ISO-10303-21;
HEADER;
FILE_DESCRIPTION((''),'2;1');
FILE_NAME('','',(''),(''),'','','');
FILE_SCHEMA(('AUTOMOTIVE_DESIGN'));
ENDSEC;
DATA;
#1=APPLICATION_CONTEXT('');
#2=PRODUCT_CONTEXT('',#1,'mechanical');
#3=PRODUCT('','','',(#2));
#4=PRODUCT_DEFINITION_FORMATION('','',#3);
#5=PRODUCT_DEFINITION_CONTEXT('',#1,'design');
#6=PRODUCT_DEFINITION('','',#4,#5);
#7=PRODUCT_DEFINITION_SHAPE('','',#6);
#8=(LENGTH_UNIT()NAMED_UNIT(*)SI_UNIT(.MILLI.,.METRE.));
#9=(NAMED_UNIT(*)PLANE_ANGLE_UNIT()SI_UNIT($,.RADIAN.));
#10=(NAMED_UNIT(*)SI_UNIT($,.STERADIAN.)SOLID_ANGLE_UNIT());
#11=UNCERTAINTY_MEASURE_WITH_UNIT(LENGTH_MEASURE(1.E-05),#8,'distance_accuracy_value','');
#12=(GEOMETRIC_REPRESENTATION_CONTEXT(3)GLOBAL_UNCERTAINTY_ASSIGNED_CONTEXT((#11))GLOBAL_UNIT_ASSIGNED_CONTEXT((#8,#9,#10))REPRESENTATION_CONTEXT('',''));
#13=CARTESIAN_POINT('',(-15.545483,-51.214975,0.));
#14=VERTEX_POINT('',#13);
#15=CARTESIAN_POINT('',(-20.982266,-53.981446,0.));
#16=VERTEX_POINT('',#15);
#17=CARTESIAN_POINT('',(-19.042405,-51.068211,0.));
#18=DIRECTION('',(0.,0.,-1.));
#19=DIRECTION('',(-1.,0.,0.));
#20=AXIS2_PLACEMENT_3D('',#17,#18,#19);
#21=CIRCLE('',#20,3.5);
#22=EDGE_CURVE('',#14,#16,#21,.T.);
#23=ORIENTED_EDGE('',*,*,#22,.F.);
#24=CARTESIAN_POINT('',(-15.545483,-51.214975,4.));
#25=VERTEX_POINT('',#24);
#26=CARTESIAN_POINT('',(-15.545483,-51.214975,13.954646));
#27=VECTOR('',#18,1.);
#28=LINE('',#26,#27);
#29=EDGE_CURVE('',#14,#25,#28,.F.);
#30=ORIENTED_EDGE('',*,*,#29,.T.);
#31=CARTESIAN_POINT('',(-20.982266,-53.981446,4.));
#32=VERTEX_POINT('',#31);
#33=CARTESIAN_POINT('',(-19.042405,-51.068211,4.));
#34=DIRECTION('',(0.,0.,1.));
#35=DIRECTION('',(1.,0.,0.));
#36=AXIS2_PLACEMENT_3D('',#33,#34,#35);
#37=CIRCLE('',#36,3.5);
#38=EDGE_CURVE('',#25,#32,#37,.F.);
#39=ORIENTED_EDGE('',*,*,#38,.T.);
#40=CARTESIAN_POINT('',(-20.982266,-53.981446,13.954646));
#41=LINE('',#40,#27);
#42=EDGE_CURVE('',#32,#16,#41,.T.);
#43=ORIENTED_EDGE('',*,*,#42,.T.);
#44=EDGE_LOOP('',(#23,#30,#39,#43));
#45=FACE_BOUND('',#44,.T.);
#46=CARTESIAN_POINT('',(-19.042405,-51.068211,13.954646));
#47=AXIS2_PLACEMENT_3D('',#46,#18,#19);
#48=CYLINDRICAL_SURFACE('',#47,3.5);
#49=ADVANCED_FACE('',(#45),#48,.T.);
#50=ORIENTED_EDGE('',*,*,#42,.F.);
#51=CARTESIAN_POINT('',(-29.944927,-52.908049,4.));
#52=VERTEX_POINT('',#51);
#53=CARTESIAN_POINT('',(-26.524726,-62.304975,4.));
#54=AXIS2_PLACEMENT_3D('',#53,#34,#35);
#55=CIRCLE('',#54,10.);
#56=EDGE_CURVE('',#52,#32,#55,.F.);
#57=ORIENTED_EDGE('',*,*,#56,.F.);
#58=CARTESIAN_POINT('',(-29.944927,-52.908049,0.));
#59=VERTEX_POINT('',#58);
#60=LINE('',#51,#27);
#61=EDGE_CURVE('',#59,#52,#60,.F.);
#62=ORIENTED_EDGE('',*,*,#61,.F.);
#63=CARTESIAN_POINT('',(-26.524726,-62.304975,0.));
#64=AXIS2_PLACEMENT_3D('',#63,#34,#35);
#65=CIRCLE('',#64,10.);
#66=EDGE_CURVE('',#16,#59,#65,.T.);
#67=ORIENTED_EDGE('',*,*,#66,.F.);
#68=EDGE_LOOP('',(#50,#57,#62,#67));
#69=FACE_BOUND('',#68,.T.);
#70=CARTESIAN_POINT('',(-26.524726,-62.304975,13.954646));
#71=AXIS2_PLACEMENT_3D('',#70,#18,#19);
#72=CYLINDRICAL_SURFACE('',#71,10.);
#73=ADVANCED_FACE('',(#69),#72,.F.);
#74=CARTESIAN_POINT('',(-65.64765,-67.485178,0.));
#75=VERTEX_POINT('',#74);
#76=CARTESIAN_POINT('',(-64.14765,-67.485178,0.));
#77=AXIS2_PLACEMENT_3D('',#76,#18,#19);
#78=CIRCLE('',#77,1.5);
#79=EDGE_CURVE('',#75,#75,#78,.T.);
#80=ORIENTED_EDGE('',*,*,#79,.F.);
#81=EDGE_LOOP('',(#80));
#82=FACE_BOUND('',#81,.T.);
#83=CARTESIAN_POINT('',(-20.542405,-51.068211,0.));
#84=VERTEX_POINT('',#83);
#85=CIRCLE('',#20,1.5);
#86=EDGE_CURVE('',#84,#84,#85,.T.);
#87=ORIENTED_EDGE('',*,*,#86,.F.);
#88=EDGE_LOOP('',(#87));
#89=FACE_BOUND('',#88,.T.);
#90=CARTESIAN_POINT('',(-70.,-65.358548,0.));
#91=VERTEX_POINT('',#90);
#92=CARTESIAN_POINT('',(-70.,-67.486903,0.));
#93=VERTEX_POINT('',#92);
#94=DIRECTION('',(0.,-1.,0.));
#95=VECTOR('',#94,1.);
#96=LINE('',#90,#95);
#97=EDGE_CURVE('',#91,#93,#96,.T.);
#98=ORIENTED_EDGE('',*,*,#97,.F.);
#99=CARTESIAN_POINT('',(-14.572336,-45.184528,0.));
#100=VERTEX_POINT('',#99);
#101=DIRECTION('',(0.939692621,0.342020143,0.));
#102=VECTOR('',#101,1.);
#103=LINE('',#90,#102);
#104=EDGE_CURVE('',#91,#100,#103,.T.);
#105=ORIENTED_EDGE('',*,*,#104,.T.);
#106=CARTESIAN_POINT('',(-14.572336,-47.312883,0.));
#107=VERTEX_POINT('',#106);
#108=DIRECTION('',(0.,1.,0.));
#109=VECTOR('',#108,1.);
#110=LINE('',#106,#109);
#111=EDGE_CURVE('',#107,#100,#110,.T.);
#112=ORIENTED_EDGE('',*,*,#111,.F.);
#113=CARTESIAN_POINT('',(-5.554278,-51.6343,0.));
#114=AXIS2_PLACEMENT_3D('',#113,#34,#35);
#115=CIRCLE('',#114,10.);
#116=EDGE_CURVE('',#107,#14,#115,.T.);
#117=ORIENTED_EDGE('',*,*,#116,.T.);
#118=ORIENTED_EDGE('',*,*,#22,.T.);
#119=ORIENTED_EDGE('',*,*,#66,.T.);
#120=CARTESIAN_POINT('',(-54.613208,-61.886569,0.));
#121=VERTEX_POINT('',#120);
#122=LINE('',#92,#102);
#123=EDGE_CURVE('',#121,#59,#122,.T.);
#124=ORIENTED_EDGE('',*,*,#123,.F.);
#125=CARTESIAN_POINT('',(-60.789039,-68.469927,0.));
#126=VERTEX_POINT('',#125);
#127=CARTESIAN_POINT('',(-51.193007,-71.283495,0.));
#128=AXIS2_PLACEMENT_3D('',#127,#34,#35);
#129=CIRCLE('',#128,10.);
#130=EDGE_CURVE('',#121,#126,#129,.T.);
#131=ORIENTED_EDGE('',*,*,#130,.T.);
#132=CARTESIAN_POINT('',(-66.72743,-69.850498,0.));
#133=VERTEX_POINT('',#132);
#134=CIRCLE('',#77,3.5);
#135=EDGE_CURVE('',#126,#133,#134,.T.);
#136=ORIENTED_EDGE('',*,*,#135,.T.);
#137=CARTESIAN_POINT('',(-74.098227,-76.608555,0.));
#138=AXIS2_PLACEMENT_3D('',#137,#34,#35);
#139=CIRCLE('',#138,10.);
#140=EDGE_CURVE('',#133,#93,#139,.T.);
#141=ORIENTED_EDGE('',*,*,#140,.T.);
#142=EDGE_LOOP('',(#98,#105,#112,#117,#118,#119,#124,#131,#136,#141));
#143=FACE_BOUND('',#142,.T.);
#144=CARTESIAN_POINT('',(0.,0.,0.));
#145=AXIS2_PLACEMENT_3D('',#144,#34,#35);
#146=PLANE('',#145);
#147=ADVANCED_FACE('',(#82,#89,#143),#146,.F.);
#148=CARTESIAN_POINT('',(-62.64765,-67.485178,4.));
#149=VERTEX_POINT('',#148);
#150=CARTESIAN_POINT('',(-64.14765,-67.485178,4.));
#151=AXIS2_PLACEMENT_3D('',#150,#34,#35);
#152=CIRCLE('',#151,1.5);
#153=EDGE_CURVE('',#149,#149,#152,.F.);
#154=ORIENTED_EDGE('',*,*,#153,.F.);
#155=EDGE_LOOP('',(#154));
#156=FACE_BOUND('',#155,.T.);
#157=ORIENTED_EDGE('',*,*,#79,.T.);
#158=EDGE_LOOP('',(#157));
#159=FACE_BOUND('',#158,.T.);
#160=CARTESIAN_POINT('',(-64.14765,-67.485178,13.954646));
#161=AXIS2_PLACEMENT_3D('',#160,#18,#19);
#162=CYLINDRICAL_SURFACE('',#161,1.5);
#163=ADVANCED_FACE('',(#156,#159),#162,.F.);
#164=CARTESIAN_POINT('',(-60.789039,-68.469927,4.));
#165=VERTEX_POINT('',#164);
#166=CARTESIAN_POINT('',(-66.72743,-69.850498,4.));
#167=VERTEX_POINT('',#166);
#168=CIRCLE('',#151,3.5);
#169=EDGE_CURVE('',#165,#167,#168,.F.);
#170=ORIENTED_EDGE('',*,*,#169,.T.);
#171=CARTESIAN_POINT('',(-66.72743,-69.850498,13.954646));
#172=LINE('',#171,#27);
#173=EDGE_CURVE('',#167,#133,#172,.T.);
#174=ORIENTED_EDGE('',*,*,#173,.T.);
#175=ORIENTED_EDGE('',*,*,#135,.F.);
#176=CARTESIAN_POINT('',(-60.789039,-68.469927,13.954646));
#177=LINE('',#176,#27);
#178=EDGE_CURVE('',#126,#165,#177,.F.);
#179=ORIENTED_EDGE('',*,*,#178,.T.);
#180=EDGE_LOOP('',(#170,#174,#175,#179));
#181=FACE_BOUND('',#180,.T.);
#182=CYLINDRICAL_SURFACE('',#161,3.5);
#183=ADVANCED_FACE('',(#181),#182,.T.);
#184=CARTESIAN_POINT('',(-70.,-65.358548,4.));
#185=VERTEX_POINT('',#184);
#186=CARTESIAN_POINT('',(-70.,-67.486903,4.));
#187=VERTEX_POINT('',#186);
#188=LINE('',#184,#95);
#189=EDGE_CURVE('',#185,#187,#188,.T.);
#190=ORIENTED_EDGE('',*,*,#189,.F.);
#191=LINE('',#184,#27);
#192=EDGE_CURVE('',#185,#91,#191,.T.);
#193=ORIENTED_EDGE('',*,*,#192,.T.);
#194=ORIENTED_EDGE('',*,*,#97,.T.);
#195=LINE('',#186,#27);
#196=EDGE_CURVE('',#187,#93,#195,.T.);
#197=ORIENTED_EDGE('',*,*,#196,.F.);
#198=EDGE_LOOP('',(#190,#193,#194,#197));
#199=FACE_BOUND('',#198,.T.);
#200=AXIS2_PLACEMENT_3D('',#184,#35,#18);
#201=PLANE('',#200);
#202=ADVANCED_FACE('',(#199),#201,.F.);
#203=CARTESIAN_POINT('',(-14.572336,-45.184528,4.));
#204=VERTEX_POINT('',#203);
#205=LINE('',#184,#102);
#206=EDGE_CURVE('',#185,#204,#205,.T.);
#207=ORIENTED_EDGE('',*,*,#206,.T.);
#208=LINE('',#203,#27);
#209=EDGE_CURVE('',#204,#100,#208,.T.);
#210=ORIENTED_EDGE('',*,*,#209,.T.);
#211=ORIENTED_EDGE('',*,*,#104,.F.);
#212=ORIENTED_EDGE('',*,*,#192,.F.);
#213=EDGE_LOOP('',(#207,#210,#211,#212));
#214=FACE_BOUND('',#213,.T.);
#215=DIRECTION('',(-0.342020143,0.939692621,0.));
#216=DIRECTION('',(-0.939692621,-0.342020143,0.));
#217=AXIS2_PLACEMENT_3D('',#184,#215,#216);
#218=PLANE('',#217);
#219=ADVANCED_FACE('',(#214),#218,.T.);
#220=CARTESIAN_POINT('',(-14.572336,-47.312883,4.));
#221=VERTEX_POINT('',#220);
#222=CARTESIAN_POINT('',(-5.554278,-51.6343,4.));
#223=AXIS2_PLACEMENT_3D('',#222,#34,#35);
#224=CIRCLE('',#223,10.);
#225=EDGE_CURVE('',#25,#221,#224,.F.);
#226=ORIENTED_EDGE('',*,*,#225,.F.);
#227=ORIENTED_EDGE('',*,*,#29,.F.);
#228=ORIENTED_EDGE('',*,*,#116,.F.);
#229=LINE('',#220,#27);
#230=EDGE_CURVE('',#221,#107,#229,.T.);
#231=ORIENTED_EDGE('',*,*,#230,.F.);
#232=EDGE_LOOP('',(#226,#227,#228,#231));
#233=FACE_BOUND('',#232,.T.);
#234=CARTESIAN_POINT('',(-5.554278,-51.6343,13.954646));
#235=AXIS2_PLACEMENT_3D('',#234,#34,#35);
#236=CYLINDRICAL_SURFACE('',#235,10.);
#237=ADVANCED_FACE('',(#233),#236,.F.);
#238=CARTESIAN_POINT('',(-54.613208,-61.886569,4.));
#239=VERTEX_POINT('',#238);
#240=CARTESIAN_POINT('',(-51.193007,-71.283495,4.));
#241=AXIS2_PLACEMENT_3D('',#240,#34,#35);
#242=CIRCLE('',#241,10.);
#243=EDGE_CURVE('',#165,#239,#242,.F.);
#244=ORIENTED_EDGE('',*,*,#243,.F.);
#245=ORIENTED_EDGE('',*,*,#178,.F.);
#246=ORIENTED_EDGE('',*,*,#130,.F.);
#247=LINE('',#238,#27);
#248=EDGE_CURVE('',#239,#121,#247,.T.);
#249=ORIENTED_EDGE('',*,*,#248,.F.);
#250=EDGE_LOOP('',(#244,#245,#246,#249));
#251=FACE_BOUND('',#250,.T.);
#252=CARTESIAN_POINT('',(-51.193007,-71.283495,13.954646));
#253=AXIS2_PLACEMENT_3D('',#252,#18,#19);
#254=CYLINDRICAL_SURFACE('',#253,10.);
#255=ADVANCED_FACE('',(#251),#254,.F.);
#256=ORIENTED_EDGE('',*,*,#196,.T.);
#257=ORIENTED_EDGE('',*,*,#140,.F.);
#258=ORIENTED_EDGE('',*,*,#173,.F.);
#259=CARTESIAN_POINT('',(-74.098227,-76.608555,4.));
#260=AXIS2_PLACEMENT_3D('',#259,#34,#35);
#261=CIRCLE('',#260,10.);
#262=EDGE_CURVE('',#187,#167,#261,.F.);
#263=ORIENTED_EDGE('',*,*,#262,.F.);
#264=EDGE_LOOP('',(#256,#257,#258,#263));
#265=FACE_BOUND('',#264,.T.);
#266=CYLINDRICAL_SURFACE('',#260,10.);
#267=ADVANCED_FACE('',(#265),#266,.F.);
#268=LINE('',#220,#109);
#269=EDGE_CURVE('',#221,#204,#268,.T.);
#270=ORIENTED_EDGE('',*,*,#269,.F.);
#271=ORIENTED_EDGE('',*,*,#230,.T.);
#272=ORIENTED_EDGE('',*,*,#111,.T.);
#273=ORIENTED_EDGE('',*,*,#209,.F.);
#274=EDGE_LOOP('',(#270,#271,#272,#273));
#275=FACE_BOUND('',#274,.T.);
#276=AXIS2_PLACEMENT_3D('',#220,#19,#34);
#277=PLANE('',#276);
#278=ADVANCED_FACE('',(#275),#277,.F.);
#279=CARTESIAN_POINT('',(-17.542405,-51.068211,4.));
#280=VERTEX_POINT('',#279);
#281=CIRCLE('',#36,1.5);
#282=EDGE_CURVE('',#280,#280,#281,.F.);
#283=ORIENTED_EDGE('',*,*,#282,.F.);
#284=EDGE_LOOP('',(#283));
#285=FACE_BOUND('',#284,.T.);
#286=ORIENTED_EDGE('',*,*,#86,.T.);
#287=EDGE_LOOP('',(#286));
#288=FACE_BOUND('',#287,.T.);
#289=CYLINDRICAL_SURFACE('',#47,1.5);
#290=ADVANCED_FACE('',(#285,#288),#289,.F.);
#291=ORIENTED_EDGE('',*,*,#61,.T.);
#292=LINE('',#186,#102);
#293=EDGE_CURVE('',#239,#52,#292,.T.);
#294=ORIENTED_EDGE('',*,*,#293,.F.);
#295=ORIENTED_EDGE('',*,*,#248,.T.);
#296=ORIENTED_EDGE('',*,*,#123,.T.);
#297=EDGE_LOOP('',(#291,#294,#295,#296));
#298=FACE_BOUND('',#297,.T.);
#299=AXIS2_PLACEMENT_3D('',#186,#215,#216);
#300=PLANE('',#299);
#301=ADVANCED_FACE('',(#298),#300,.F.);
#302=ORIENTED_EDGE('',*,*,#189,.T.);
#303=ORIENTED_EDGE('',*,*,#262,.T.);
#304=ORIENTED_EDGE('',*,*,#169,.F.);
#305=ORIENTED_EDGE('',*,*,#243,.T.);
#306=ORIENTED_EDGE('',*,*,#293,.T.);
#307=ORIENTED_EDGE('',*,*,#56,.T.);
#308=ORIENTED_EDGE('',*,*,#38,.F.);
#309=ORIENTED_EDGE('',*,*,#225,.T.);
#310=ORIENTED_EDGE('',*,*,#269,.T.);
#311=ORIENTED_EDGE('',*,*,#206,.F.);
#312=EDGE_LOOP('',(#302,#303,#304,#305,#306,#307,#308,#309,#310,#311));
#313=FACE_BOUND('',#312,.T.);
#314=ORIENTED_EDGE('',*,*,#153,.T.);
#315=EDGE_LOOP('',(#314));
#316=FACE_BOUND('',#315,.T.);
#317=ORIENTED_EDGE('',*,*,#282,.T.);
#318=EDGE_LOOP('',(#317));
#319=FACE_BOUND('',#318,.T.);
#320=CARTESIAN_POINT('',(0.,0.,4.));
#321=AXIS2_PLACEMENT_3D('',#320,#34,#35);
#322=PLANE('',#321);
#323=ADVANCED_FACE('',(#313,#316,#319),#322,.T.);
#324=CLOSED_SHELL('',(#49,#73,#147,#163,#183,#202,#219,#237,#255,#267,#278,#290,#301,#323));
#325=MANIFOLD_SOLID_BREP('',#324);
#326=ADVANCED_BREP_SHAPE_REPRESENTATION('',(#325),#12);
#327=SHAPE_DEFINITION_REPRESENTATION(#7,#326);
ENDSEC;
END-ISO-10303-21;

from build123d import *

# Parameters (mm, degrees)
BOSS_EXTRUDE1_DEPTH = 4
SKETCH2_R           = 1.5
BOSS_EXTRUDE2_DEPTH = 4
FILLET1_DEPTH       = 4


with BuildPart() as part:
    # Sketch1 → Boss-Extrude1 (new body)
    with BuildSketch(Plane.XY):
        Polygon((-70, -65.358547654), (-14.572335871, -45.184527756), (-14.572335871, -47.312883301), (-70, -67.486903199), align=None)
    extrude(amount=BOSS_EXTRUDE1_DEPTH)

    # Sketch2 → Boss-Extrude2 (add)
    # profile 1 of 6: a face of its own
    with BuildSketch(Plane(origin=(0, 0, 0), x_dir=(-1, 0, 0), z_dir=(0, 0, -1))):
        with BuildLine():
            ThreePointArc((15.753480329, -49.871140271), (17.845334, -54.357134945), (22.331328674, -52.265281274))
            ThreePointArc((22.331328674, -52.265281274), (22.489231637, -51.675979394), (22.542404501, -51.068210772))
            ThreePointArc((22.542404501, -51.068210772), (22.513056924, -50.615914674), (22.425506352, -50.171203601))
            Line((22.425506352, -50.171203601), (17.027383224, -48.206447461))
            ThreePointArc((17.027383224, -48.206447461), (16.262879385, -48.941184649), (15.753480329, -49.871140271))
        make_face()
        with Locations((19.042404501, -51.068210772)):
            Circle(SKETCH2_R, mode=Mode.SUBTRACT)
    # profile 2 of 6: a face of its own
    with BuildSketch(Plane(origin=(0, 0, 0), x_dir=(-1, 0, 0), z_dir=(0, 0, -1))):
        with BuildLine():
            Line((16.437520615, -47.991755029), (15.753480329, -49.871140271))
            ThreePointArc((15.753480329, -49.871140271), (16.262879385, -48.941184649), (17.027383224, -48.206447461))
            Line((17.027383224, -48.206447461), (16.437520615, -47.991755029))
        make_face()
    # profile 3 of 6: a face of its own
    with BuildSketch(Plane(origin=(0, 0, 0), x_dir=(-1, 0, 0), z_dir=(0, 0, -1))):
        with BuildLine():
            Line((22.331328674, -52.265281274), (23.015368961, -50.385896032))
            Line((23.015368961, -50.385896032), (22.425506352, -50.171203601))
            ThreePointArc((22.425506352, -50.171203601), (22.513056924, -50.615914674), (22.542404501, -51.068210772))
            ThreePointArc((22.542404501, -51.068210772), (22.489231637, -51.675979394), (22.331328674, -52.265281274))
        make_face()
    # profile 4 of 6: a face of its own
    with BuildSketch(Plane(origin=(0, 0, 0), x_dir=(-1, 0, 0), z_dir=(0, 0, -1))):
        with BuildLine():
            ThreePointArc((62.132629021, -64.62341434), (61.368125183, -65.358151529), (60.858726126, -66.28810715))
            ThreePointArc((60.858726126, -66.28810715), (62.950579797, -70.774101825), (67.436574472, -68.682248154))
            ThreePointArc((67.436574472, -68.682248154), (67.594477435, -68.092946274), (67.647650299, -67.485177652))
            ThreePointArc((67.647650299, -67.485177652), (67.618302722, -67.032881553), (67.53075215, -66.58817048))
            Line((67.53075215, -66.58817048), (62.132629021, -64.62341434))
        make_face()
        with Locations((64.147650299, -67.485177652)):
            Circle(SKETCH2_R, mode=Mode.SUBTRACT)
    # profile 5 of 6: a face of its own
    with BuildSketch(Plane(origin=(0, 0, 0), x_dir=(-1, 0, 0), z_dir=(0, 0, -1))):
        with BuildLine():
            Line((62.132629021, -64.62341434), (61.542766413, -64.408721909))
            Line((61.542766413, -64.408721909), (60.858726126, -66.28810715))
            ThreePointArc((60.858726126, -66.28810715), (61.368125183, -65.358151529), (62.132629021, -64.62341434))
        make_face()
    # profile 6 of 6: a face of its own
    with BuildSketch(Plane(origin=(0, 0, 0), x_dir=(-1, 0, 0), z_dir=(0, 0, -1))):
        with BuildLine():
            ThreePointArc((67.647650299, -67.485177652), (67.594477435, -68.092946274), (67.436574472, -68.682248154))
            Line((67.436574472, -68.682248154), (68.120614758, -66.802862912))
            Line((68.120614758, -66.802862912), (67.53075215, -66.58817048))
            ThreePointArc((67.53075215, -66.58817048), (67.618302722, -67.032881553), (67.647650299, -67.485177652))
        make_face()
    extrude(amount=-BOSS_EXTRUDE2_DEPTH)

    # Fillet1: read off the stored shape, not the designer's step
    # Fillet1 outline → Fillet1 (add)
    with BuildSketch(Plane.XY):
        with BuildLine():
            ThreePointArc((-15.753480329, -49.871140271), (-15.583589929, -50.532858787), (-15.545482945, -51.214974613))
            ThreePointArc((-15.545482945, -51.214974613), (-15.257091898, -49.214503996), (-14.572335871, -47.312883301))
            Line((-14.572335871, -47.312883301), (-16.437520615, -47.991755029))
            Line((-16.437520615, -47.991755029), (-15.753480329, -49.871140271))
        make_face()
        with BuildLine():
            Line((-23.015368961, -50.385896032), (-29.94492695, -52.908048877))
            ThreePointArc((-29.94492695, -52.908048877), (-25.335591086, -52.375928842), (-20.982265505, -53.981445964))
            ThreePointArc((-20.982265505, -53.981445964), (-21.794013834, -53.231228591), (-22.331328674, -52.265281274))
            Line((-22.331328674, -52.265281274), (-23.015368961, -50.385896032))
        make_face()
        with BuildLine():
            ThreePointArc((-60.858726126, -66.28810715), (-60.649434207, -67.373445046), (-60.78903907, -68.469926664))
            ThreePointArc((-60.78903907, -68.469926664), (-58.486204715, -64.44176545), (-54.613208423, -61.886569064))
            Line((-54.613208423, -61.886569064), (-61.542766413, -64.408721909))
            Line((-61.542766413, -64.408721909), (-60.858726126, -66.28810715))
        make_face()
        with BuildLine():
            ThreePointArc((-70, -67.486903199), (-68.243205646, -68.501846695), (-66.727429559, -69.850497708))
            ThreePointArc((-66.727429559, -69.850497708), (-67.139576393, -69.301321437), (-67.436574472, -68.682248154))
            Line((-67.436574472, -68.682248154), (-68.120614758, -66.802862912))
            Line((-68.120614758, -66.802862912), (-70, -67.486903199))
        make_face()
    extrude(amount=FILLET1_DEPTH)


solid = part.part
